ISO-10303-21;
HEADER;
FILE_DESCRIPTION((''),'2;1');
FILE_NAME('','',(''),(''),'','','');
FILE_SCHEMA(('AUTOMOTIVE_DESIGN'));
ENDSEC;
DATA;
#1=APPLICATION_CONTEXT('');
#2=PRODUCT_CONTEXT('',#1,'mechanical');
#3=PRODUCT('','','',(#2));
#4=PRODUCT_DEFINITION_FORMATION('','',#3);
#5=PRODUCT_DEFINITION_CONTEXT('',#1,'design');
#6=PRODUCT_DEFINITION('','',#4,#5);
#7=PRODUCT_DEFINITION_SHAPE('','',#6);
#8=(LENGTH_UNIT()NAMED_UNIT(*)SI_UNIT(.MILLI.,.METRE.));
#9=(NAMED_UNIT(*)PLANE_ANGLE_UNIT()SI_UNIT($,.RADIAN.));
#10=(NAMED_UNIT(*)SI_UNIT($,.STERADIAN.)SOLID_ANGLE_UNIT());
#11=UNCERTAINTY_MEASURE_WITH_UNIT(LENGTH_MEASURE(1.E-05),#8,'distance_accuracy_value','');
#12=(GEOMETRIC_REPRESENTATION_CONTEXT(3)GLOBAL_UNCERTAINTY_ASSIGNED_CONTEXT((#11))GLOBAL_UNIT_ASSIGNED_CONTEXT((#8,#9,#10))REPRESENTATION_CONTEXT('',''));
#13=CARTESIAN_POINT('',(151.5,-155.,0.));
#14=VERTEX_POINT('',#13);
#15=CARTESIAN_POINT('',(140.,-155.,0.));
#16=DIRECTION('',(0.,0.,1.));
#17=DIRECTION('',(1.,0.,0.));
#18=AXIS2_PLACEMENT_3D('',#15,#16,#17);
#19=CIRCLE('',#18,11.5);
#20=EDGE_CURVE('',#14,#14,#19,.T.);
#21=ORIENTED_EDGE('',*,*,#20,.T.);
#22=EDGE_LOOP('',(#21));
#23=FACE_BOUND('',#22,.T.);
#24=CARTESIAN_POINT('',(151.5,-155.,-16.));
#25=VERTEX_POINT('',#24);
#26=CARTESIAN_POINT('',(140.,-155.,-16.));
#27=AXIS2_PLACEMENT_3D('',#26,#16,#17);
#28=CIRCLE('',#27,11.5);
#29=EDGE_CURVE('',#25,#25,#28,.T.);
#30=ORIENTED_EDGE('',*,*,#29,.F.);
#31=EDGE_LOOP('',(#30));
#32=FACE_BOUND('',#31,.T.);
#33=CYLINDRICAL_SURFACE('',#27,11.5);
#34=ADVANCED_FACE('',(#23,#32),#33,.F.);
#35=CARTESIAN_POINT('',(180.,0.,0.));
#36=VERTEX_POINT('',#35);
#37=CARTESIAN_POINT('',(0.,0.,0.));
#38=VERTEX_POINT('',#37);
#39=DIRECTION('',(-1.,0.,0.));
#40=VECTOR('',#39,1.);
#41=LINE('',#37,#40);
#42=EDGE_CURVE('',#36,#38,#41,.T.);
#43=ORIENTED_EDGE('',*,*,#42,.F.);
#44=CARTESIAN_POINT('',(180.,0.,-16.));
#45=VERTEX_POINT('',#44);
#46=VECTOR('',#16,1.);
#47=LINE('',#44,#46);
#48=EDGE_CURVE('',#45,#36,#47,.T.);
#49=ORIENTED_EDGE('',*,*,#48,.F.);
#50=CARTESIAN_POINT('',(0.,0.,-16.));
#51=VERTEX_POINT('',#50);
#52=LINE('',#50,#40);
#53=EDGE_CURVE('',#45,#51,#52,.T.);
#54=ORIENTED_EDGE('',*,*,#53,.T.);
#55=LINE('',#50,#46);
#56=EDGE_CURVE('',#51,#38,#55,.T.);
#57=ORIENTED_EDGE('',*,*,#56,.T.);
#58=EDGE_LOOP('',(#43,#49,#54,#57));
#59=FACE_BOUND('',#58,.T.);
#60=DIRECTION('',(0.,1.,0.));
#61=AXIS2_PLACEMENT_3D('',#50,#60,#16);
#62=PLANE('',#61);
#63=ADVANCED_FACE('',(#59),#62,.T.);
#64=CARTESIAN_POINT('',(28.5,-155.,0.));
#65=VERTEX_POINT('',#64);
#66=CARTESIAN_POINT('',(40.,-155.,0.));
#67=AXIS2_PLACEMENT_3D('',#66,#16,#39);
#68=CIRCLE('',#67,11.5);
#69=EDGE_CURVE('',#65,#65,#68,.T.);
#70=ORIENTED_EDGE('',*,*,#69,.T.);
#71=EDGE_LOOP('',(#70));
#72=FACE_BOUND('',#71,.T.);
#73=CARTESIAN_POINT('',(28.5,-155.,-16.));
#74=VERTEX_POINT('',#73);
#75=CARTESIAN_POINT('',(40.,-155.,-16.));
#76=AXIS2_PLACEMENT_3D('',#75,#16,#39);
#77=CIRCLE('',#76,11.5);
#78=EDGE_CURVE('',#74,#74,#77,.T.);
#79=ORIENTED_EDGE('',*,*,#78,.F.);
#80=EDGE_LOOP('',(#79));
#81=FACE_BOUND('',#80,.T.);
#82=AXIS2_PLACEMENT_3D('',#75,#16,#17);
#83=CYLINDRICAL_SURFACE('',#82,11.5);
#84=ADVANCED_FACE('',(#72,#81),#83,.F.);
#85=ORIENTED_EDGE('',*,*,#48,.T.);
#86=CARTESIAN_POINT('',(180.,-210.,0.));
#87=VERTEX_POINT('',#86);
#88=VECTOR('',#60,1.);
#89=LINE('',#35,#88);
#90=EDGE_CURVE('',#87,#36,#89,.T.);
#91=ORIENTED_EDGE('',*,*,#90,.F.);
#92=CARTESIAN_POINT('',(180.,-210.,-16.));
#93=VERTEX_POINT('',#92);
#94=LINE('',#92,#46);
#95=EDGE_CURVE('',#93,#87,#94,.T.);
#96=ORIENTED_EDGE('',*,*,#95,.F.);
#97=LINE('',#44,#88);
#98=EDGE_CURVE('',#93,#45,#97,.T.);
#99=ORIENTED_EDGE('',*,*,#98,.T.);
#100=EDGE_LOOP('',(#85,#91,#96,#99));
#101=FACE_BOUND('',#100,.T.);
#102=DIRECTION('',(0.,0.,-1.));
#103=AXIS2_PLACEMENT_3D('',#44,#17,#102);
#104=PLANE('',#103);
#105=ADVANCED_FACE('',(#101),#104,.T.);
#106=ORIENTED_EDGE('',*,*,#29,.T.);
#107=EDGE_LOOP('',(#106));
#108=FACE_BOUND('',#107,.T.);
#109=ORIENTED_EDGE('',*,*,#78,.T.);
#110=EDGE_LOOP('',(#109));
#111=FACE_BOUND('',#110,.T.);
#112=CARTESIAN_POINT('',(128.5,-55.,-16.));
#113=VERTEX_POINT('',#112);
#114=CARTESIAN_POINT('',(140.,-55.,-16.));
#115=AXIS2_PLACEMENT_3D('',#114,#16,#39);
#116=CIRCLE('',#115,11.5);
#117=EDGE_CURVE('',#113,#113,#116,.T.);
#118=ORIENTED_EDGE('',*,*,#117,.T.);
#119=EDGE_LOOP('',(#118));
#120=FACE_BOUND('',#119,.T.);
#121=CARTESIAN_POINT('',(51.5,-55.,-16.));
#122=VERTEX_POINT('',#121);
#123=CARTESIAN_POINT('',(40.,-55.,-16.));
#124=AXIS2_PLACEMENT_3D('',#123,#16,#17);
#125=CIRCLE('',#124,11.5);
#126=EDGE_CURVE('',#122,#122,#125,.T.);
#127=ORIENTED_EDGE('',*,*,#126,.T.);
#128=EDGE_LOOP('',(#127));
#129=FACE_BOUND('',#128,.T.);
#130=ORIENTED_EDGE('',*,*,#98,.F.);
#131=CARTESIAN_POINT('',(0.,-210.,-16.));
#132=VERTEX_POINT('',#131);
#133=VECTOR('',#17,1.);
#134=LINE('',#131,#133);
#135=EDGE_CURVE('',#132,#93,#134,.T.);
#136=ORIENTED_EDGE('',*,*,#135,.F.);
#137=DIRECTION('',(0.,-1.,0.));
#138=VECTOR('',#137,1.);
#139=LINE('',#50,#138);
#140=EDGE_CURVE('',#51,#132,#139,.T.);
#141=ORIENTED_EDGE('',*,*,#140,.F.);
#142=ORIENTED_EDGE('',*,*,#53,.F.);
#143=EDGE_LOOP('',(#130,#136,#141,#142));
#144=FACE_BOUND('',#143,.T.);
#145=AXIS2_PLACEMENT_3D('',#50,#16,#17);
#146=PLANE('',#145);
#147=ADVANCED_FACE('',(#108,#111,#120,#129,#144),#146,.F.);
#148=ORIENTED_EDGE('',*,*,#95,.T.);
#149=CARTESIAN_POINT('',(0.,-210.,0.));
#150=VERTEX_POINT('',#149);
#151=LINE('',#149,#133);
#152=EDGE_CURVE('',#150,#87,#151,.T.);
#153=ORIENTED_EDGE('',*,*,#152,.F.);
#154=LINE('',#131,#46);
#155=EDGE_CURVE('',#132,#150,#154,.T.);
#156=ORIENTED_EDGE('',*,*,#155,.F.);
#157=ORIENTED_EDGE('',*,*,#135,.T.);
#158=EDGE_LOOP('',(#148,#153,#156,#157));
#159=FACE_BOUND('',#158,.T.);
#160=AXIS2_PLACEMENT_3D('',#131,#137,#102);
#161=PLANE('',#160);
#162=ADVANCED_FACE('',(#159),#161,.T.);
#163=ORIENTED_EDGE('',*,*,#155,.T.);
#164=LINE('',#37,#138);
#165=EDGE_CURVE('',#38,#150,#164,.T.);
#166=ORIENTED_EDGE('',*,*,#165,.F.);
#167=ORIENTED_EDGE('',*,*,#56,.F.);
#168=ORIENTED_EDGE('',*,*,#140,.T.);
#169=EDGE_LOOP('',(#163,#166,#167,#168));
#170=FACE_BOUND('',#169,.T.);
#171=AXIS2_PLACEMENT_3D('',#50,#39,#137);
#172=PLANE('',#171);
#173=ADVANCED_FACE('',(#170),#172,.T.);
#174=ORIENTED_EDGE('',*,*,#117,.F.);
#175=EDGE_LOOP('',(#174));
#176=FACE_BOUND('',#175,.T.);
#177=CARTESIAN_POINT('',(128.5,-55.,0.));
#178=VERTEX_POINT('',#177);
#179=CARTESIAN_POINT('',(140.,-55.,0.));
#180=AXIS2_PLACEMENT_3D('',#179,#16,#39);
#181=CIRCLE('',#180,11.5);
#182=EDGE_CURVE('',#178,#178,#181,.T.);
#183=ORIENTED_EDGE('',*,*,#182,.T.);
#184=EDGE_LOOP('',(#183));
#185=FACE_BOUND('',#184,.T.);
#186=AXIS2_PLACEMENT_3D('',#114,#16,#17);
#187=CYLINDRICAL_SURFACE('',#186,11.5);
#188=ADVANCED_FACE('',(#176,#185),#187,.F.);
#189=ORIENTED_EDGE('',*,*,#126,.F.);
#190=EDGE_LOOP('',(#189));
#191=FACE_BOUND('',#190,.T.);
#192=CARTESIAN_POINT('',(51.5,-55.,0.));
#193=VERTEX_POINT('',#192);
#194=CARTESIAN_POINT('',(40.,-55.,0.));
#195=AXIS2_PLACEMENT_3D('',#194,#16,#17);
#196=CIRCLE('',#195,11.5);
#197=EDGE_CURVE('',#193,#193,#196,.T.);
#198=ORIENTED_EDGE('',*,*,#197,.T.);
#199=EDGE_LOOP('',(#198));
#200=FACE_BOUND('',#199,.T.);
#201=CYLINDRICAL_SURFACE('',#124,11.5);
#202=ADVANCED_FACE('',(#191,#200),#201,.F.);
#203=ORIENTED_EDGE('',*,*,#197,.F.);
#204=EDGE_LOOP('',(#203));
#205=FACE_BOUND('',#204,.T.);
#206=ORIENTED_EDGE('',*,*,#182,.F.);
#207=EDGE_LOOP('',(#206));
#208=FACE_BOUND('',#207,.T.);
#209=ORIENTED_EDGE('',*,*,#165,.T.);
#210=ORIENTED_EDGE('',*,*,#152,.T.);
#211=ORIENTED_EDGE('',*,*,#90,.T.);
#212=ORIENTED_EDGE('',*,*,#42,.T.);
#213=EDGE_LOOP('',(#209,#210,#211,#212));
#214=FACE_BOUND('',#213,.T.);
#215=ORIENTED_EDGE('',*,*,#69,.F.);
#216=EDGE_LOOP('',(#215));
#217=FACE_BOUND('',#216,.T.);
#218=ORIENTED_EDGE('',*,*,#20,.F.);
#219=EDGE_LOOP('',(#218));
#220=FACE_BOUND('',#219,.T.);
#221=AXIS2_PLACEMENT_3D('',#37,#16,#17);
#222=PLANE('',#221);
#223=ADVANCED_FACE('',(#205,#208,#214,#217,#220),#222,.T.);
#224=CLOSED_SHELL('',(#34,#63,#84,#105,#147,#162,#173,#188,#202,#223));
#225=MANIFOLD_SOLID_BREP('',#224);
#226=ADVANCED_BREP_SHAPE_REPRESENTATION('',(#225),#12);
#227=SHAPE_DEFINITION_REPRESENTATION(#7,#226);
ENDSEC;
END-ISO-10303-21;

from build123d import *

# Parameters (mm, degrees)
SKETCH_1_W             = 180
SKETCH_1_H             = 210
SKETCH_1_R             = 11.5
SM_BASE_FLANGE_1_DEPTH = 16


# Sheet-metal steps are written as plain solids
with BuildPart() as part:
    # Sketch 1 → Базовая кромка1 (new body)
    with BuildSketch(Plane.XY):
        with Locations((90, -105)):
            Rectangle(SKETCH_1_W, SKETCH_1_H)
        with Locations((40, -55)):
            Circle(SKETCH_1_R, mode=Mode.SUBTRACT)
        with Locations(Location((140, -55, 0), (0, 0, 180))):
            Circle(SKETCH_1_R, mode=Mode.SUBTRACT)
        with Locations((140, -155)):
            Circle(SKETCH_1_R, mode=Mode.SUBTRACT)
        with Locations(Location((40, -155, 0), (0, 0, 180))):
            Circle(SKETCH_1_R, mode=Mode.SUBTRACT)
    extrude(amount=-SM_BASE_FLANGE_1_DEPTH)


solid = part.part
